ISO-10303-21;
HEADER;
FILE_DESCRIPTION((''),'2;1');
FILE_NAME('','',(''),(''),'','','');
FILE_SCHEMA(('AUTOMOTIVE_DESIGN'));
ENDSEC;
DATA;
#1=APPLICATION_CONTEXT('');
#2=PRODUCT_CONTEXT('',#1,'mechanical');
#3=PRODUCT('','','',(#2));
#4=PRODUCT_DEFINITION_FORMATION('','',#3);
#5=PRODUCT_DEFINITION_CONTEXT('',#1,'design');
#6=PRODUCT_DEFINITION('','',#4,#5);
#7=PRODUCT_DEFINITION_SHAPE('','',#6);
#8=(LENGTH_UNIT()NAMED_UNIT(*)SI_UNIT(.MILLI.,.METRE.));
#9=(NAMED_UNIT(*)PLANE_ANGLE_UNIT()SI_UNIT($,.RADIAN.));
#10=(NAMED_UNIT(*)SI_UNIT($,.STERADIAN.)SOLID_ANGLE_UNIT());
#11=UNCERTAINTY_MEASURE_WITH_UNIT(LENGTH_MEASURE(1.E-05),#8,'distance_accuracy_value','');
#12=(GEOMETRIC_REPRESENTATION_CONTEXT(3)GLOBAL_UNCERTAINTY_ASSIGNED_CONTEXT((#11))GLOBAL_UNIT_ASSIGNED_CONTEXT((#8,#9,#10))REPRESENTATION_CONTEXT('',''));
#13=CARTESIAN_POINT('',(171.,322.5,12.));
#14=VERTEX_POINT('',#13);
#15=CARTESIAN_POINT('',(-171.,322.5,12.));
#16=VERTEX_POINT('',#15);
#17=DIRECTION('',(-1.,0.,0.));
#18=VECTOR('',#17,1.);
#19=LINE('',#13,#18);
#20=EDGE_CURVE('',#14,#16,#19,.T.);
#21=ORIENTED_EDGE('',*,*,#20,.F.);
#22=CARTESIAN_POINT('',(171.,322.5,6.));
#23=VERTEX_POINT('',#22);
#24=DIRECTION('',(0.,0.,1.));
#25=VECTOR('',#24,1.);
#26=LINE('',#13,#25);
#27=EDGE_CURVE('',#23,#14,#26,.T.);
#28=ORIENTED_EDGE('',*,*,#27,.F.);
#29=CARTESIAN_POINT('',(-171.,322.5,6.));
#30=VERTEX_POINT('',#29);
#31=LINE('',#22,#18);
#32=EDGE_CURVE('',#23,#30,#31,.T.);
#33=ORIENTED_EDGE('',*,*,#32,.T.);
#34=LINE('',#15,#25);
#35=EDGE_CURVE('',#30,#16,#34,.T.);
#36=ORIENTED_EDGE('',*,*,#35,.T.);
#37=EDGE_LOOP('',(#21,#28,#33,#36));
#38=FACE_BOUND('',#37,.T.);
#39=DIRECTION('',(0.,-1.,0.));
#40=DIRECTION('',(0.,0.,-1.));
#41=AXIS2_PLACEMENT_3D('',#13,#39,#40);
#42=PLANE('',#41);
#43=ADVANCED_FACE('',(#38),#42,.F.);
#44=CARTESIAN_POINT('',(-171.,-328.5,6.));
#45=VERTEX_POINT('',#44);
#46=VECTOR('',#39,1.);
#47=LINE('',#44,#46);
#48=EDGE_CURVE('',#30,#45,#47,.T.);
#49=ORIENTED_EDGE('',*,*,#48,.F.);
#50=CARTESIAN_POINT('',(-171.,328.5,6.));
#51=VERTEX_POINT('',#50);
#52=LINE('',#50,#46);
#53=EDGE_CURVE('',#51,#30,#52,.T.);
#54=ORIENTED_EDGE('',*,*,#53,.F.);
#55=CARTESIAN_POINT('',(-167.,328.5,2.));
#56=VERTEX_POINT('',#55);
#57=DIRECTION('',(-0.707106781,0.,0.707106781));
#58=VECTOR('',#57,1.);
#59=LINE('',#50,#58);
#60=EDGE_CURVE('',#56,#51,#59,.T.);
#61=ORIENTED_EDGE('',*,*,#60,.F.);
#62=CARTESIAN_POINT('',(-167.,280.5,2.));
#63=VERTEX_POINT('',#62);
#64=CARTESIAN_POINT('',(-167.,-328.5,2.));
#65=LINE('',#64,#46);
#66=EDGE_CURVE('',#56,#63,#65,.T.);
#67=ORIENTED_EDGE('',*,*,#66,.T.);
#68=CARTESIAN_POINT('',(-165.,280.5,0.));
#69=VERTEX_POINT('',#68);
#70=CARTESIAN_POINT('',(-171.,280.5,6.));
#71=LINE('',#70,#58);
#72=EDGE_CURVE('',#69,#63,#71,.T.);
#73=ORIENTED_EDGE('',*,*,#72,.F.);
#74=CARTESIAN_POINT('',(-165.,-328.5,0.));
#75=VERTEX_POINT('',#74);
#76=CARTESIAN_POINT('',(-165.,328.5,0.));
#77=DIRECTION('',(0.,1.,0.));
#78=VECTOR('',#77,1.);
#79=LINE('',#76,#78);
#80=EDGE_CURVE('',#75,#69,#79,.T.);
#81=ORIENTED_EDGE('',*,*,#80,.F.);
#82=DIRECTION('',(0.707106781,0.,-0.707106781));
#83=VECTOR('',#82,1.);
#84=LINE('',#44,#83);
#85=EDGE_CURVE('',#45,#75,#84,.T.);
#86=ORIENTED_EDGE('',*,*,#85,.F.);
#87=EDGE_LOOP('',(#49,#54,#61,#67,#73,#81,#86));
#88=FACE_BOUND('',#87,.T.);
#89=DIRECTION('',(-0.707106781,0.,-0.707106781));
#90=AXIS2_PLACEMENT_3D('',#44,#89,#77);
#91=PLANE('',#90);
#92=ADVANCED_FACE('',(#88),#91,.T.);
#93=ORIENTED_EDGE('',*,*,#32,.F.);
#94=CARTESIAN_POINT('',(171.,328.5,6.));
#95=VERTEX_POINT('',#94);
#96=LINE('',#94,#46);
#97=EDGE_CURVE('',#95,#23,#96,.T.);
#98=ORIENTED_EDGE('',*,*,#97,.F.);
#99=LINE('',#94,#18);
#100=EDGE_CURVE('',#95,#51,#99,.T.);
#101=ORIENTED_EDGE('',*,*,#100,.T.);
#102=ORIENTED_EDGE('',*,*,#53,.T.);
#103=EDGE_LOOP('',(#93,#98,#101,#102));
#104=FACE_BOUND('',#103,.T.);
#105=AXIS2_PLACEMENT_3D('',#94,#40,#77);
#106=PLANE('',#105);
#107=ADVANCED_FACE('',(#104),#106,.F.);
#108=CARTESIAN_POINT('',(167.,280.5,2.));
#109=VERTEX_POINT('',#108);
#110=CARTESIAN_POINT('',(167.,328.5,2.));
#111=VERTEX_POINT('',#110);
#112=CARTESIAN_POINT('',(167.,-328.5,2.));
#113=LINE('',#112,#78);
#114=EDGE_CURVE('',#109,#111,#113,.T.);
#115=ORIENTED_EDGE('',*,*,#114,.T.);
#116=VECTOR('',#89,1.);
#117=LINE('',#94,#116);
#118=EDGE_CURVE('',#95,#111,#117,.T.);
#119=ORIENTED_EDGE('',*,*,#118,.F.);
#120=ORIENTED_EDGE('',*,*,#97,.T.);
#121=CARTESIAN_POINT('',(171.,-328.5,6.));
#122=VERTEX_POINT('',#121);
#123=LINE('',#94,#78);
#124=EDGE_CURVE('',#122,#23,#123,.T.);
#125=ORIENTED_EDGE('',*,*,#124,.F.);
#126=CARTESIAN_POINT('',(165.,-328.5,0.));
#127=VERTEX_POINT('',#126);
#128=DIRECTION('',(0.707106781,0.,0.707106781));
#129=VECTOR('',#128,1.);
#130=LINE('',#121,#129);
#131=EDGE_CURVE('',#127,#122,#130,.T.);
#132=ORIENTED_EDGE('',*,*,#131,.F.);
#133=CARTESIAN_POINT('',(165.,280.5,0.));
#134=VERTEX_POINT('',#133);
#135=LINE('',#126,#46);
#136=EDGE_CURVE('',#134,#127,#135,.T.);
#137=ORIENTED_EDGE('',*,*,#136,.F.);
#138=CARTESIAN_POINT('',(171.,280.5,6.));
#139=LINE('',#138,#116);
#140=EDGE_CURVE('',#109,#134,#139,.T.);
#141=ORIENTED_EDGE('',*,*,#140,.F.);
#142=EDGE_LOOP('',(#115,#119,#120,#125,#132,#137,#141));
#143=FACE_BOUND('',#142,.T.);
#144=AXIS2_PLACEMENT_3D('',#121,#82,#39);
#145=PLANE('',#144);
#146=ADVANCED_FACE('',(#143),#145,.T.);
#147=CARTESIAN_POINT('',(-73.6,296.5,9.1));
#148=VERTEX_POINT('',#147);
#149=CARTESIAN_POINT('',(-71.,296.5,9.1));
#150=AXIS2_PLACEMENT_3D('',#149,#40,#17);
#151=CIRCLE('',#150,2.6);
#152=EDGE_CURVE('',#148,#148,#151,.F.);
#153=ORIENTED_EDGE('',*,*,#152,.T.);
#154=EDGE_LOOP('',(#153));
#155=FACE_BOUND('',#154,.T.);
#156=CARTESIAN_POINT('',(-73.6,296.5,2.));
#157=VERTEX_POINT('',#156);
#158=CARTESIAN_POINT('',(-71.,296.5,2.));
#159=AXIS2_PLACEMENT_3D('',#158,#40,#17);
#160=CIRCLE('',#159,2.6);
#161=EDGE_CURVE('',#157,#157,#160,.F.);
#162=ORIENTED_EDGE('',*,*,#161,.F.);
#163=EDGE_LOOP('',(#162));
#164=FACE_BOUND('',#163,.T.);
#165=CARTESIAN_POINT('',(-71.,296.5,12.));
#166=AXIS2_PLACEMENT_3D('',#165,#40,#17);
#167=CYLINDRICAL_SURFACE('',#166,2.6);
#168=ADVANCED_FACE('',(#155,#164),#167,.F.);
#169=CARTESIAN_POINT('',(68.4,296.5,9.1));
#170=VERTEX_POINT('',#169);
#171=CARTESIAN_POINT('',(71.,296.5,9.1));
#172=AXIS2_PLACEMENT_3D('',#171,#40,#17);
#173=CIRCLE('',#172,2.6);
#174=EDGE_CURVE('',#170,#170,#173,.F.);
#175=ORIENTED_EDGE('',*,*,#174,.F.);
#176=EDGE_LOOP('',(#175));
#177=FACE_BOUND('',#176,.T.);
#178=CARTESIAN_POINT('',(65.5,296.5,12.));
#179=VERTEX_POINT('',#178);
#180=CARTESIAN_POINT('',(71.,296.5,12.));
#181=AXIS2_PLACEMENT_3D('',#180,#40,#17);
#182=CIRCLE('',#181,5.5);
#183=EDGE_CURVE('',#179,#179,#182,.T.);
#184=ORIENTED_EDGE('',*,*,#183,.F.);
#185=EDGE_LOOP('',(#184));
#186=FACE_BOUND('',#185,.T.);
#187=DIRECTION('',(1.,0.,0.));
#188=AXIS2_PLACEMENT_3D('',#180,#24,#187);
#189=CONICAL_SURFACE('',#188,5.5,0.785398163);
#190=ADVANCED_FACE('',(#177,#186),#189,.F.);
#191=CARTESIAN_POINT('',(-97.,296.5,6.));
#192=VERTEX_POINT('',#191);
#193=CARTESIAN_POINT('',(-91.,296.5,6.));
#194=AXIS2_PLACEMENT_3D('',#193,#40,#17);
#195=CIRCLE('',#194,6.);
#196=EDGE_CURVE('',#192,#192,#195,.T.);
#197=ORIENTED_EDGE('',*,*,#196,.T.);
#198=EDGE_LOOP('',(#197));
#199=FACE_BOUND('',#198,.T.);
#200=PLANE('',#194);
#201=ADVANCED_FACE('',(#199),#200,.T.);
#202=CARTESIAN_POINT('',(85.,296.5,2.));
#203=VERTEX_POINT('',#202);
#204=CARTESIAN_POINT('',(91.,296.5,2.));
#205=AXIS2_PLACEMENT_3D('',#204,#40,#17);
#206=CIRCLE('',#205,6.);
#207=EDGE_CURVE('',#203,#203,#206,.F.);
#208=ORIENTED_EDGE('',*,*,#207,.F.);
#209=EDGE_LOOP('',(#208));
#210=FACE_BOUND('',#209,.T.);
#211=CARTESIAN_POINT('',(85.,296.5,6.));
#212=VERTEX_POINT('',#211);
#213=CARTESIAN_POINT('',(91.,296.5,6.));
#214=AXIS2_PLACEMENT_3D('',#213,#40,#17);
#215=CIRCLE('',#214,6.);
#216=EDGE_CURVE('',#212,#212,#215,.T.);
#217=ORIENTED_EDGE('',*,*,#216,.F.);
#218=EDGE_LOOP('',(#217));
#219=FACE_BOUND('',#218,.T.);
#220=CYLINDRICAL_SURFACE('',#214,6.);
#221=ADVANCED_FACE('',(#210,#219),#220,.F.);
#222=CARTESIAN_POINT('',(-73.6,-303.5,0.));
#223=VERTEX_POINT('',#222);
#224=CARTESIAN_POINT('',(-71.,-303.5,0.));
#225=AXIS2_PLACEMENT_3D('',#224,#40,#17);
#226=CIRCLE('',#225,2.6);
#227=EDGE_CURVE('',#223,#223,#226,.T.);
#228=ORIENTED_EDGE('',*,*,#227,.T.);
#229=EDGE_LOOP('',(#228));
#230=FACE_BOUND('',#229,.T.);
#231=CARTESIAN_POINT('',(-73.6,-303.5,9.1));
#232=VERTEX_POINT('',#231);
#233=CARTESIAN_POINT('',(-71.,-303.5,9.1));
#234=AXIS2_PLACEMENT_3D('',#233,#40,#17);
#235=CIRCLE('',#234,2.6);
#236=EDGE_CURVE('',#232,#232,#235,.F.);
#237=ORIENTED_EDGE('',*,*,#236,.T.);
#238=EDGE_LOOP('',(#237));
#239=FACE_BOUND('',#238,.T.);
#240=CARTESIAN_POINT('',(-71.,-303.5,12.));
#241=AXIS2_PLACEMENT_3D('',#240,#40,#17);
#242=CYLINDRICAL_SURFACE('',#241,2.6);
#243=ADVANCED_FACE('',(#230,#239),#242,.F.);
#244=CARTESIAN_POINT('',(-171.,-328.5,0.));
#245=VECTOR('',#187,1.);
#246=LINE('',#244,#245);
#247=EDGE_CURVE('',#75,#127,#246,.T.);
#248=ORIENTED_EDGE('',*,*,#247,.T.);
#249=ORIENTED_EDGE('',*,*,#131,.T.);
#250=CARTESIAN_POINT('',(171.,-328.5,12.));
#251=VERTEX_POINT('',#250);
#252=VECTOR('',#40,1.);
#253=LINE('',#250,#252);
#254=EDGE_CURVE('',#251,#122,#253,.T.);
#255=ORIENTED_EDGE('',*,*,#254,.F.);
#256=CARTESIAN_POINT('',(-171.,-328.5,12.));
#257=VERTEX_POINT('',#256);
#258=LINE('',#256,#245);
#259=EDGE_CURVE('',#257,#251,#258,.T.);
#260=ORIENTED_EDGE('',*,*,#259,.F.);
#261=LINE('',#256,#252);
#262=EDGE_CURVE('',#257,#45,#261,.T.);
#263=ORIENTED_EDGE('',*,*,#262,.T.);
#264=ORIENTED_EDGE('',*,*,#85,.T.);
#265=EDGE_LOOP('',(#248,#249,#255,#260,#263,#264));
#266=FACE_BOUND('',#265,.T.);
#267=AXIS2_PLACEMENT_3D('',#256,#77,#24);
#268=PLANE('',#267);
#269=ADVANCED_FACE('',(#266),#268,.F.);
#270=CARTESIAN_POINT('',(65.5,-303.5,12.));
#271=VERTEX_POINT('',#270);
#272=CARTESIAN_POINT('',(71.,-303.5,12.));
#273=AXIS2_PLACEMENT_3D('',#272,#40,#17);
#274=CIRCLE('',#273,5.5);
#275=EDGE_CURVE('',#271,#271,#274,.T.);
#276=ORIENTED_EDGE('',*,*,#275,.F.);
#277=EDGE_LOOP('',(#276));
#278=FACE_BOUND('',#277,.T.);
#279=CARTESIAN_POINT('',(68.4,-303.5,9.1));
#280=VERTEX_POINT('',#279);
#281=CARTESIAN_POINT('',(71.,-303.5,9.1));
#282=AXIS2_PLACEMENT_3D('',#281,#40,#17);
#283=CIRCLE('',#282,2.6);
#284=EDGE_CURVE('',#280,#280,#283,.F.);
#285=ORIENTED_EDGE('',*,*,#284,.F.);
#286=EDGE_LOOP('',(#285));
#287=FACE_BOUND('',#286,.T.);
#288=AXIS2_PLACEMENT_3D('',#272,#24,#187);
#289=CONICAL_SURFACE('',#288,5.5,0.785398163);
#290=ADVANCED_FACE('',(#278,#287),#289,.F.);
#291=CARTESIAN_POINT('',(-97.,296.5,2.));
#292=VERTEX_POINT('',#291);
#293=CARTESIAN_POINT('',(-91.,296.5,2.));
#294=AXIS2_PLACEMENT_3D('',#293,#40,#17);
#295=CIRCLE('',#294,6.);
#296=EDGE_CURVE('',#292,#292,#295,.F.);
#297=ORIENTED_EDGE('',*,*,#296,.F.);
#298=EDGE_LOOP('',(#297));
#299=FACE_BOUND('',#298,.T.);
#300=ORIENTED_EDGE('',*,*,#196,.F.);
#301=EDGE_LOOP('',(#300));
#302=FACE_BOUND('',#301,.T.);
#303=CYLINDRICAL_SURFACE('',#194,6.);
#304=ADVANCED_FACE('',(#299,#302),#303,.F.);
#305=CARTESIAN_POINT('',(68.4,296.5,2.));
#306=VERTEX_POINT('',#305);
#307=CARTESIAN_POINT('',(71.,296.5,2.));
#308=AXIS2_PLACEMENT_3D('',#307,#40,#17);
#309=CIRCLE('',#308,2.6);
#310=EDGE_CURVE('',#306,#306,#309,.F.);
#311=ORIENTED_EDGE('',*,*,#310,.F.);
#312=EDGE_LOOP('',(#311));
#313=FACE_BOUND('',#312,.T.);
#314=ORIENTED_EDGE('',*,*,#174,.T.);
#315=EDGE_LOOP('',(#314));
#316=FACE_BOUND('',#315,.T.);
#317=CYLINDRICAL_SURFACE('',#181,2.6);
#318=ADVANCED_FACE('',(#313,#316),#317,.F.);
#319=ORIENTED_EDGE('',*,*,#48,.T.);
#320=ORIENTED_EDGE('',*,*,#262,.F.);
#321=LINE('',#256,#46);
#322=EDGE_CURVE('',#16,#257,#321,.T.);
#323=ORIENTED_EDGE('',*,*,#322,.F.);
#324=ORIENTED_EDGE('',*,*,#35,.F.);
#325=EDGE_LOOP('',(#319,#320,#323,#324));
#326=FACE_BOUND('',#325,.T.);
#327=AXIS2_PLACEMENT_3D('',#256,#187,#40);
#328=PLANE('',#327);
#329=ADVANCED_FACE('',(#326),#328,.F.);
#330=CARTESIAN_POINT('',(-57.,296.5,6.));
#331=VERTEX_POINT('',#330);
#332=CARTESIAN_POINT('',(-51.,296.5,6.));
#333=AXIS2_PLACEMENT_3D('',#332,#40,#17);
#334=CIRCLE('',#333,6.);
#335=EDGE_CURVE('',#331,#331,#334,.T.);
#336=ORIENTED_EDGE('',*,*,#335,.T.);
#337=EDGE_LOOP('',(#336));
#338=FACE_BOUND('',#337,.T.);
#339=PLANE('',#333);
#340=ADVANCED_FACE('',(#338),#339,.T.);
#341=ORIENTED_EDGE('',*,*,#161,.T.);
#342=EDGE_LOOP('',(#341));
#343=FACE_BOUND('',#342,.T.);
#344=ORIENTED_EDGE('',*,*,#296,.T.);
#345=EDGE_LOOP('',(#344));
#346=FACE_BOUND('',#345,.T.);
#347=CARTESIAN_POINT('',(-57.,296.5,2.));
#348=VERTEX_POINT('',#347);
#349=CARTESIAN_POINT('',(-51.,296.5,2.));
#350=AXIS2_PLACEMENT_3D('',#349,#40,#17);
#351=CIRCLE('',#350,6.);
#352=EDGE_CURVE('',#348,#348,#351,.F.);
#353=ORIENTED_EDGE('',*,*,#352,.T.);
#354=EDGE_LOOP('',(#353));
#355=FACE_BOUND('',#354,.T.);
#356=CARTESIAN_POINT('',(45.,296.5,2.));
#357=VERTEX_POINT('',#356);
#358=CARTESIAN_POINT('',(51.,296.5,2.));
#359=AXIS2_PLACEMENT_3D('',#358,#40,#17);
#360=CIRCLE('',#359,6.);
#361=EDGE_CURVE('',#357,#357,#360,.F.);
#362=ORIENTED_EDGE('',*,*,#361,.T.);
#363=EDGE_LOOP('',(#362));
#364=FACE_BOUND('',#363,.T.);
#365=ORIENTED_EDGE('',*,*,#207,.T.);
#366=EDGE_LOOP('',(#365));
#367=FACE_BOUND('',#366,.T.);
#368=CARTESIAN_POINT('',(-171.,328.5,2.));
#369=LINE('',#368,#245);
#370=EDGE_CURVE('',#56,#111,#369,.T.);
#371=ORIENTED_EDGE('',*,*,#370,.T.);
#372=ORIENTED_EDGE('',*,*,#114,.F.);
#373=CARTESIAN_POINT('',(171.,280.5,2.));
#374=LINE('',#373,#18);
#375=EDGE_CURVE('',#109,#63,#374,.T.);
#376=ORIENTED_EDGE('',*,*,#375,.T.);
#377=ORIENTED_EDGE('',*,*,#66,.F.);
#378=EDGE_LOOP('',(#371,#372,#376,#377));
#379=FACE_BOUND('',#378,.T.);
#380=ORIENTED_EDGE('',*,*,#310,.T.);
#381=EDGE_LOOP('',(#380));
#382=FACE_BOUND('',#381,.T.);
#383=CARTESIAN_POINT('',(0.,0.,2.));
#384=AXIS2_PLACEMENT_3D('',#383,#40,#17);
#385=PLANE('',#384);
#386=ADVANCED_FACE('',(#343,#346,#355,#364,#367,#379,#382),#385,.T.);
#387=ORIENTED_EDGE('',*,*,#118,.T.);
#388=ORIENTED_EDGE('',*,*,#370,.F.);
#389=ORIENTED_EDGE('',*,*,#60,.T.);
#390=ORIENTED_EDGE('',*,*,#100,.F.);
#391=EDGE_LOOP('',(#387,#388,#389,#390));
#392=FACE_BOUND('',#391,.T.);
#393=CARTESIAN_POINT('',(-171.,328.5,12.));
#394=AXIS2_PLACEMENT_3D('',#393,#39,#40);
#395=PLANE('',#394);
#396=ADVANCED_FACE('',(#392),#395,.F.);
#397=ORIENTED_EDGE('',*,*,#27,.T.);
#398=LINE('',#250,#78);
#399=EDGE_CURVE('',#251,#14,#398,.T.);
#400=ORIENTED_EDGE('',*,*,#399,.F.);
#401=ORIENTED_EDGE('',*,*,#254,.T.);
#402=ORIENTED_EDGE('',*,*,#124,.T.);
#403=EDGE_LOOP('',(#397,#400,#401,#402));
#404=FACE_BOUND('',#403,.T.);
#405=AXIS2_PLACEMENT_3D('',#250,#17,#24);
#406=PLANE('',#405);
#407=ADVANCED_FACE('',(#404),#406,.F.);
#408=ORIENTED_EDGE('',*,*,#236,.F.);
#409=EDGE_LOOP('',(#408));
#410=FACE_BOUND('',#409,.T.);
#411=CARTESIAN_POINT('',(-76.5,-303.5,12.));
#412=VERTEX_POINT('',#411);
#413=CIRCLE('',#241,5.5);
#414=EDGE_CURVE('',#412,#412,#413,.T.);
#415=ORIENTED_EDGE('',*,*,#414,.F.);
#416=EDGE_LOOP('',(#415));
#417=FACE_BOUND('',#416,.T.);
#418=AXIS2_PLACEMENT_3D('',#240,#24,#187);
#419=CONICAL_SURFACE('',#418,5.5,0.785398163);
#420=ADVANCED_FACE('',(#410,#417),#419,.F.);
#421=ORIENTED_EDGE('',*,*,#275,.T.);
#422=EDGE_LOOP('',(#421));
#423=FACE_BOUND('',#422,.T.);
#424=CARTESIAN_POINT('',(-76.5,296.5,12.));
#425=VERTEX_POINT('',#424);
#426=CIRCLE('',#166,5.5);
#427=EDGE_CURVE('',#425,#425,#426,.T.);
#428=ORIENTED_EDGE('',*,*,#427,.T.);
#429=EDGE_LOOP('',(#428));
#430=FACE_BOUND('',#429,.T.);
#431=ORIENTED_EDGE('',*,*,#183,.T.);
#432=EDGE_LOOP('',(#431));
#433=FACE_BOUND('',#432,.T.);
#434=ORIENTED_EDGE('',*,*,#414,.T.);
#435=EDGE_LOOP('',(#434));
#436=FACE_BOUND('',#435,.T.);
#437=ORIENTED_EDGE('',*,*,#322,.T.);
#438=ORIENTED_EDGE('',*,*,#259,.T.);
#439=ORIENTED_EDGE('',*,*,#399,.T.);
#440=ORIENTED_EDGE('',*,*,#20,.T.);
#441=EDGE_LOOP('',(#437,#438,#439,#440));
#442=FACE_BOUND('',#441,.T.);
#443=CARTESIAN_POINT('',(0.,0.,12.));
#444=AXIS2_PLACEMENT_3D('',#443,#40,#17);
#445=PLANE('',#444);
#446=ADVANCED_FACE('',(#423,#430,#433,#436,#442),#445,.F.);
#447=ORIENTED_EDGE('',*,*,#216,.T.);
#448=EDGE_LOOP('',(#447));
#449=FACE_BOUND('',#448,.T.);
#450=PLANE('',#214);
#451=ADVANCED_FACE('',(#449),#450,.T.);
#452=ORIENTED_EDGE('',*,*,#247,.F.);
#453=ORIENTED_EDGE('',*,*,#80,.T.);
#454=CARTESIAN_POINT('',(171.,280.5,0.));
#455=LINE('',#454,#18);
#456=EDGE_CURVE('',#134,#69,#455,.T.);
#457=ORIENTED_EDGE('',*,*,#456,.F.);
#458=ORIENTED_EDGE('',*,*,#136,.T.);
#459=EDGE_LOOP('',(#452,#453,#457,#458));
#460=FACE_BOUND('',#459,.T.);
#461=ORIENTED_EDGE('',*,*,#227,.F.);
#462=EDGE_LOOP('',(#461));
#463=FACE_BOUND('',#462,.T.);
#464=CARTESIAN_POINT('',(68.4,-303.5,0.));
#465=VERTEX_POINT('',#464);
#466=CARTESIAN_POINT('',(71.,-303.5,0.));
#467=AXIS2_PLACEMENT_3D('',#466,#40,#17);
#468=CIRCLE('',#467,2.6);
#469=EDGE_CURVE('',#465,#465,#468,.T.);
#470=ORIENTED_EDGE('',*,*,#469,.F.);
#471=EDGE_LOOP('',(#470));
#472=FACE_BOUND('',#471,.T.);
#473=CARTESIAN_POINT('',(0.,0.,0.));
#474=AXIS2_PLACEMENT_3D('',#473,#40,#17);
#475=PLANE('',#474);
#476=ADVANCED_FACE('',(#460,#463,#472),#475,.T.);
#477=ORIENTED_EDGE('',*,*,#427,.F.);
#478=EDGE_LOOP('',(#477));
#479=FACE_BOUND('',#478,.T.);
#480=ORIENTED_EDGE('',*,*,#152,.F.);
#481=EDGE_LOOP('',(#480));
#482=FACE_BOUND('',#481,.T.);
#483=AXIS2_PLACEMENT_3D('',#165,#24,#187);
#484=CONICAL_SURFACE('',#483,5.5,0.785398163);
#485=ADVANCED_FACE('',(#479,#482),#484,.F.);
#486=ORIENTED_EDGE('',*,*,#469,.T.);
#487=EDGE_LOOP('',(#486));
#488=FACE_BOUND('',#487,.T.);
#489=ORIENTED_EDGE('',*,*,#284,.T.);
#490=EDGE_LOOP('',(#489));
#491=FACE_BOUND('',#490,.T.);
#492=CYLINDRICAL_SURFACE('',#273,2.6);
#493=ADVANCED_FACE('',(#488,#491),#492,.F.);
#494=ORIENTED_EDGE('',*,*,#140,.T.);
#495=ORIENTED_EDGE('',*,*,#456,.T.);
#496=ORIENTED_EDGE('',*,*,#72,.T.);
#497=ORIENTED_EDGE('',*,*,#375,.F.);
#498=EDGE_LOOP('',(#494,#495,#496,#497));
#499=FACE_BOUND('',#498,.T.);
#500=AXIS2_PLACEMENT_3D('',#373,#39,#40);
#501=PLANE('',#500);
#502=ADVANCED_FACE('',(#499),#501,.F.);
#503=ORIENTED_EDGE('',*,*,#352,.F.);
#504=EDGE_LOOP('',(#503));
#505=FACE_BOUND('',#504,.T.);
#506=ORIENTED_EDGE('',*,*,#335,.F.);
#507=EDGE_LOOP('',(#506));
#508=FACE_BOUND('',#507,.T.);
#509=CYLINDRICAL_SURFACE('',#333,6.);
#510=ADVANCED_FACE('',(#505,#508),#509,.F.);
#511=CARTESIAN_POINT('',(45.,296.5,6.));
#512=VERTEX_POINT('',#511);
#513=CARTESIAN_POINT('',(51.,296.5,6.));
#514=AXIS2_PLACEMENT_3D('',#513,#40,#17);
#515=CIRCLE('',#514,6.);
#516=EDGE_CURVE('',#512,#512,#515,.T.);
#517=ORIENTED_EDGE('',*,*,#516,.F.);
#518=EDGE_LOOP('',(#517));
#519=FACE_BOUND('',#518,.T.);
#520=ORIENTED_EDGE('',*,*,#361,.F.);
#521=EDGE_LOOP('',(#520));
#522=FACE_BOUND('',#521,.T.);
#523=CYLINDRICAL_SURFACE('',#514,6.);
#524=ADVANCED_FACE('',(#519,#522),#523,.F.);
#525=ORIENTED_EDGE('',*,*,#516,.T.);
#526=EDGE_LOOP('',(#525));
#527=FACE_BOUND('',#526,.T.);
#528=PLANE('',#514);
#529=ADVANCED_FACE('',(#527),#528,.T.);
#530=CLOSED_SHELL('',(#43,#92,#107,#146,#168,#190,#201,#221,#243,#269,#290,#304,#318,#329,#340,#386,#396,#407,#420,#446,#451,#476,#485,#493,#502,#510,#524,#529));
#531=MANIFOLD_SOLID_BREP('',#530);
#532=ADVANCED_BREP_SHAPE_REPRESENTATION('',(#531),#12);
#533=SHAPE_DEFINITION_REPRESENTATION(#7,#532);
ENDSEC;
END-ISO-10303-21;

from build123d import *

# Parameters (mm, degrees)
SKETCH1_W           = 342
SKETCH1_H           = 657
BOSS_EXTRUDE1_DEPTH = 12
SKETCH2_W           = 6
SKETCH2_H           = 6
CUT_EXTRUDE1_DEPTH  = 475.362993919
CHAMFER1_SIZE       = 6
SKETCH3_R           = 2.6
CUT_EXTRUDE2_DEPTH  = 371.536435455
CHAMFER2_SIZE       = 2.9
SKETCH4_R           = 6
CUT_EXTRUDE3_DEPTH  = 6
SKETCH5_W           = 342
SKETCH5_H           = 48
CUT_EXTRUDE4_DEPTH  = 2


with BuildPart() as part:
    # Sketch1 → Boss-Extrude1 (new body)
    with BuildSketch(Plane.XY):
        Rectangle(SKETCH1_W, SKETCH1_H)
    extrude(amount=BOSS_EXTRUDE1_DEPTH)

    # Sketch2 → Cut-Extrude1 (cut, through all)
    with BuildSketch(Plane.ZY.offset(171)):
        with Locations((9, 325.5)):
            Rectangle(SKETCH2_W, SKETCH2_H)
    extrude(amount=-CUT_EXTRUDE1_DEPTH, mode=Mode.SUBTRACT)

    # Chamfer1
    chamfer1_edges = [part.edges().sort_by_distance(p)[0] for p in [
        (171, 0, 0),
        (-171, 0, 0),
    ]]
    chamfer(chamfer1_edges, length=CHAMFER1_SIZE - 0.0001)  # a hair under: the kernel refuses the full size

    # Sketch3 → Cut-Extrude2 (cut, through all)
    with BuildSketch(Plane(origin=(0, 0, 0), x_dir=(-1, 0, 0), z_dir=(0, 0, -1))):
        with Locations((-71, -303.5)):
            Circle(SKETCH3_R)
        with Locations((71, -303.5)):
            Circle(SKETCH3_R)
        with Locations((71, 296.5)):
            Circle(SKETCH3_R)
        with Locations((-71, 296.5)):
            Circle(SKETCH3_R)
    extrude(amount=-CUT_EXTRUDE2_DEPTH, mode=Mode.SUBTRACT)

    # Chamfer2
    chamfer2_edges = [part.edges().sort_by_distance(p)[0] for p in [
        (73.6, -303.5, 12),
        (-68.4, -303.5, 12),
        (-68.4, 296.5, 12),
        (73.6, 296.5, 12),
    ]]
    chamfer(chamfer2_edges, length=CHAMFER2_SIZE)

    # Sketch4 → Cut-Extrude3 (cut)
    with BuildSketch(Plane(origin=(0, 0, 0), x_dir=(-1, 0, 0), z_dir=(0, 0, -1))):
        with Locations((-91, 296.5)):
            Circle(SKETCH4_R)
        with Locations((-51, 296.5)):
            Circle(SKETCH4_R)
        with Locations((51, 296.5)):
            Circle(SKETCH4_R)
        with Locations((91, 296.5)):
            Circle(SKETCH4_R)
    extrude(amount=-CUT_EXTRUDE3_DEPTH, mode=Mode.SUBTRACT)

    # Sketch5 → Cut-Extrude4 (cut)
    with BuildSketch(Plane(origin=(0, 0, 0), x_dir=(-1, 0, 0), z_dir=(0, 0, -1))):
        with Locations((0, 304.5)):
            Rectangle(SKETCH5_W, SKETCH5_H)
    extrude(amount=-CUT_EXTRUDE4_DEPTH, mode=Mode.SUBTRACT)


solid = part.part
